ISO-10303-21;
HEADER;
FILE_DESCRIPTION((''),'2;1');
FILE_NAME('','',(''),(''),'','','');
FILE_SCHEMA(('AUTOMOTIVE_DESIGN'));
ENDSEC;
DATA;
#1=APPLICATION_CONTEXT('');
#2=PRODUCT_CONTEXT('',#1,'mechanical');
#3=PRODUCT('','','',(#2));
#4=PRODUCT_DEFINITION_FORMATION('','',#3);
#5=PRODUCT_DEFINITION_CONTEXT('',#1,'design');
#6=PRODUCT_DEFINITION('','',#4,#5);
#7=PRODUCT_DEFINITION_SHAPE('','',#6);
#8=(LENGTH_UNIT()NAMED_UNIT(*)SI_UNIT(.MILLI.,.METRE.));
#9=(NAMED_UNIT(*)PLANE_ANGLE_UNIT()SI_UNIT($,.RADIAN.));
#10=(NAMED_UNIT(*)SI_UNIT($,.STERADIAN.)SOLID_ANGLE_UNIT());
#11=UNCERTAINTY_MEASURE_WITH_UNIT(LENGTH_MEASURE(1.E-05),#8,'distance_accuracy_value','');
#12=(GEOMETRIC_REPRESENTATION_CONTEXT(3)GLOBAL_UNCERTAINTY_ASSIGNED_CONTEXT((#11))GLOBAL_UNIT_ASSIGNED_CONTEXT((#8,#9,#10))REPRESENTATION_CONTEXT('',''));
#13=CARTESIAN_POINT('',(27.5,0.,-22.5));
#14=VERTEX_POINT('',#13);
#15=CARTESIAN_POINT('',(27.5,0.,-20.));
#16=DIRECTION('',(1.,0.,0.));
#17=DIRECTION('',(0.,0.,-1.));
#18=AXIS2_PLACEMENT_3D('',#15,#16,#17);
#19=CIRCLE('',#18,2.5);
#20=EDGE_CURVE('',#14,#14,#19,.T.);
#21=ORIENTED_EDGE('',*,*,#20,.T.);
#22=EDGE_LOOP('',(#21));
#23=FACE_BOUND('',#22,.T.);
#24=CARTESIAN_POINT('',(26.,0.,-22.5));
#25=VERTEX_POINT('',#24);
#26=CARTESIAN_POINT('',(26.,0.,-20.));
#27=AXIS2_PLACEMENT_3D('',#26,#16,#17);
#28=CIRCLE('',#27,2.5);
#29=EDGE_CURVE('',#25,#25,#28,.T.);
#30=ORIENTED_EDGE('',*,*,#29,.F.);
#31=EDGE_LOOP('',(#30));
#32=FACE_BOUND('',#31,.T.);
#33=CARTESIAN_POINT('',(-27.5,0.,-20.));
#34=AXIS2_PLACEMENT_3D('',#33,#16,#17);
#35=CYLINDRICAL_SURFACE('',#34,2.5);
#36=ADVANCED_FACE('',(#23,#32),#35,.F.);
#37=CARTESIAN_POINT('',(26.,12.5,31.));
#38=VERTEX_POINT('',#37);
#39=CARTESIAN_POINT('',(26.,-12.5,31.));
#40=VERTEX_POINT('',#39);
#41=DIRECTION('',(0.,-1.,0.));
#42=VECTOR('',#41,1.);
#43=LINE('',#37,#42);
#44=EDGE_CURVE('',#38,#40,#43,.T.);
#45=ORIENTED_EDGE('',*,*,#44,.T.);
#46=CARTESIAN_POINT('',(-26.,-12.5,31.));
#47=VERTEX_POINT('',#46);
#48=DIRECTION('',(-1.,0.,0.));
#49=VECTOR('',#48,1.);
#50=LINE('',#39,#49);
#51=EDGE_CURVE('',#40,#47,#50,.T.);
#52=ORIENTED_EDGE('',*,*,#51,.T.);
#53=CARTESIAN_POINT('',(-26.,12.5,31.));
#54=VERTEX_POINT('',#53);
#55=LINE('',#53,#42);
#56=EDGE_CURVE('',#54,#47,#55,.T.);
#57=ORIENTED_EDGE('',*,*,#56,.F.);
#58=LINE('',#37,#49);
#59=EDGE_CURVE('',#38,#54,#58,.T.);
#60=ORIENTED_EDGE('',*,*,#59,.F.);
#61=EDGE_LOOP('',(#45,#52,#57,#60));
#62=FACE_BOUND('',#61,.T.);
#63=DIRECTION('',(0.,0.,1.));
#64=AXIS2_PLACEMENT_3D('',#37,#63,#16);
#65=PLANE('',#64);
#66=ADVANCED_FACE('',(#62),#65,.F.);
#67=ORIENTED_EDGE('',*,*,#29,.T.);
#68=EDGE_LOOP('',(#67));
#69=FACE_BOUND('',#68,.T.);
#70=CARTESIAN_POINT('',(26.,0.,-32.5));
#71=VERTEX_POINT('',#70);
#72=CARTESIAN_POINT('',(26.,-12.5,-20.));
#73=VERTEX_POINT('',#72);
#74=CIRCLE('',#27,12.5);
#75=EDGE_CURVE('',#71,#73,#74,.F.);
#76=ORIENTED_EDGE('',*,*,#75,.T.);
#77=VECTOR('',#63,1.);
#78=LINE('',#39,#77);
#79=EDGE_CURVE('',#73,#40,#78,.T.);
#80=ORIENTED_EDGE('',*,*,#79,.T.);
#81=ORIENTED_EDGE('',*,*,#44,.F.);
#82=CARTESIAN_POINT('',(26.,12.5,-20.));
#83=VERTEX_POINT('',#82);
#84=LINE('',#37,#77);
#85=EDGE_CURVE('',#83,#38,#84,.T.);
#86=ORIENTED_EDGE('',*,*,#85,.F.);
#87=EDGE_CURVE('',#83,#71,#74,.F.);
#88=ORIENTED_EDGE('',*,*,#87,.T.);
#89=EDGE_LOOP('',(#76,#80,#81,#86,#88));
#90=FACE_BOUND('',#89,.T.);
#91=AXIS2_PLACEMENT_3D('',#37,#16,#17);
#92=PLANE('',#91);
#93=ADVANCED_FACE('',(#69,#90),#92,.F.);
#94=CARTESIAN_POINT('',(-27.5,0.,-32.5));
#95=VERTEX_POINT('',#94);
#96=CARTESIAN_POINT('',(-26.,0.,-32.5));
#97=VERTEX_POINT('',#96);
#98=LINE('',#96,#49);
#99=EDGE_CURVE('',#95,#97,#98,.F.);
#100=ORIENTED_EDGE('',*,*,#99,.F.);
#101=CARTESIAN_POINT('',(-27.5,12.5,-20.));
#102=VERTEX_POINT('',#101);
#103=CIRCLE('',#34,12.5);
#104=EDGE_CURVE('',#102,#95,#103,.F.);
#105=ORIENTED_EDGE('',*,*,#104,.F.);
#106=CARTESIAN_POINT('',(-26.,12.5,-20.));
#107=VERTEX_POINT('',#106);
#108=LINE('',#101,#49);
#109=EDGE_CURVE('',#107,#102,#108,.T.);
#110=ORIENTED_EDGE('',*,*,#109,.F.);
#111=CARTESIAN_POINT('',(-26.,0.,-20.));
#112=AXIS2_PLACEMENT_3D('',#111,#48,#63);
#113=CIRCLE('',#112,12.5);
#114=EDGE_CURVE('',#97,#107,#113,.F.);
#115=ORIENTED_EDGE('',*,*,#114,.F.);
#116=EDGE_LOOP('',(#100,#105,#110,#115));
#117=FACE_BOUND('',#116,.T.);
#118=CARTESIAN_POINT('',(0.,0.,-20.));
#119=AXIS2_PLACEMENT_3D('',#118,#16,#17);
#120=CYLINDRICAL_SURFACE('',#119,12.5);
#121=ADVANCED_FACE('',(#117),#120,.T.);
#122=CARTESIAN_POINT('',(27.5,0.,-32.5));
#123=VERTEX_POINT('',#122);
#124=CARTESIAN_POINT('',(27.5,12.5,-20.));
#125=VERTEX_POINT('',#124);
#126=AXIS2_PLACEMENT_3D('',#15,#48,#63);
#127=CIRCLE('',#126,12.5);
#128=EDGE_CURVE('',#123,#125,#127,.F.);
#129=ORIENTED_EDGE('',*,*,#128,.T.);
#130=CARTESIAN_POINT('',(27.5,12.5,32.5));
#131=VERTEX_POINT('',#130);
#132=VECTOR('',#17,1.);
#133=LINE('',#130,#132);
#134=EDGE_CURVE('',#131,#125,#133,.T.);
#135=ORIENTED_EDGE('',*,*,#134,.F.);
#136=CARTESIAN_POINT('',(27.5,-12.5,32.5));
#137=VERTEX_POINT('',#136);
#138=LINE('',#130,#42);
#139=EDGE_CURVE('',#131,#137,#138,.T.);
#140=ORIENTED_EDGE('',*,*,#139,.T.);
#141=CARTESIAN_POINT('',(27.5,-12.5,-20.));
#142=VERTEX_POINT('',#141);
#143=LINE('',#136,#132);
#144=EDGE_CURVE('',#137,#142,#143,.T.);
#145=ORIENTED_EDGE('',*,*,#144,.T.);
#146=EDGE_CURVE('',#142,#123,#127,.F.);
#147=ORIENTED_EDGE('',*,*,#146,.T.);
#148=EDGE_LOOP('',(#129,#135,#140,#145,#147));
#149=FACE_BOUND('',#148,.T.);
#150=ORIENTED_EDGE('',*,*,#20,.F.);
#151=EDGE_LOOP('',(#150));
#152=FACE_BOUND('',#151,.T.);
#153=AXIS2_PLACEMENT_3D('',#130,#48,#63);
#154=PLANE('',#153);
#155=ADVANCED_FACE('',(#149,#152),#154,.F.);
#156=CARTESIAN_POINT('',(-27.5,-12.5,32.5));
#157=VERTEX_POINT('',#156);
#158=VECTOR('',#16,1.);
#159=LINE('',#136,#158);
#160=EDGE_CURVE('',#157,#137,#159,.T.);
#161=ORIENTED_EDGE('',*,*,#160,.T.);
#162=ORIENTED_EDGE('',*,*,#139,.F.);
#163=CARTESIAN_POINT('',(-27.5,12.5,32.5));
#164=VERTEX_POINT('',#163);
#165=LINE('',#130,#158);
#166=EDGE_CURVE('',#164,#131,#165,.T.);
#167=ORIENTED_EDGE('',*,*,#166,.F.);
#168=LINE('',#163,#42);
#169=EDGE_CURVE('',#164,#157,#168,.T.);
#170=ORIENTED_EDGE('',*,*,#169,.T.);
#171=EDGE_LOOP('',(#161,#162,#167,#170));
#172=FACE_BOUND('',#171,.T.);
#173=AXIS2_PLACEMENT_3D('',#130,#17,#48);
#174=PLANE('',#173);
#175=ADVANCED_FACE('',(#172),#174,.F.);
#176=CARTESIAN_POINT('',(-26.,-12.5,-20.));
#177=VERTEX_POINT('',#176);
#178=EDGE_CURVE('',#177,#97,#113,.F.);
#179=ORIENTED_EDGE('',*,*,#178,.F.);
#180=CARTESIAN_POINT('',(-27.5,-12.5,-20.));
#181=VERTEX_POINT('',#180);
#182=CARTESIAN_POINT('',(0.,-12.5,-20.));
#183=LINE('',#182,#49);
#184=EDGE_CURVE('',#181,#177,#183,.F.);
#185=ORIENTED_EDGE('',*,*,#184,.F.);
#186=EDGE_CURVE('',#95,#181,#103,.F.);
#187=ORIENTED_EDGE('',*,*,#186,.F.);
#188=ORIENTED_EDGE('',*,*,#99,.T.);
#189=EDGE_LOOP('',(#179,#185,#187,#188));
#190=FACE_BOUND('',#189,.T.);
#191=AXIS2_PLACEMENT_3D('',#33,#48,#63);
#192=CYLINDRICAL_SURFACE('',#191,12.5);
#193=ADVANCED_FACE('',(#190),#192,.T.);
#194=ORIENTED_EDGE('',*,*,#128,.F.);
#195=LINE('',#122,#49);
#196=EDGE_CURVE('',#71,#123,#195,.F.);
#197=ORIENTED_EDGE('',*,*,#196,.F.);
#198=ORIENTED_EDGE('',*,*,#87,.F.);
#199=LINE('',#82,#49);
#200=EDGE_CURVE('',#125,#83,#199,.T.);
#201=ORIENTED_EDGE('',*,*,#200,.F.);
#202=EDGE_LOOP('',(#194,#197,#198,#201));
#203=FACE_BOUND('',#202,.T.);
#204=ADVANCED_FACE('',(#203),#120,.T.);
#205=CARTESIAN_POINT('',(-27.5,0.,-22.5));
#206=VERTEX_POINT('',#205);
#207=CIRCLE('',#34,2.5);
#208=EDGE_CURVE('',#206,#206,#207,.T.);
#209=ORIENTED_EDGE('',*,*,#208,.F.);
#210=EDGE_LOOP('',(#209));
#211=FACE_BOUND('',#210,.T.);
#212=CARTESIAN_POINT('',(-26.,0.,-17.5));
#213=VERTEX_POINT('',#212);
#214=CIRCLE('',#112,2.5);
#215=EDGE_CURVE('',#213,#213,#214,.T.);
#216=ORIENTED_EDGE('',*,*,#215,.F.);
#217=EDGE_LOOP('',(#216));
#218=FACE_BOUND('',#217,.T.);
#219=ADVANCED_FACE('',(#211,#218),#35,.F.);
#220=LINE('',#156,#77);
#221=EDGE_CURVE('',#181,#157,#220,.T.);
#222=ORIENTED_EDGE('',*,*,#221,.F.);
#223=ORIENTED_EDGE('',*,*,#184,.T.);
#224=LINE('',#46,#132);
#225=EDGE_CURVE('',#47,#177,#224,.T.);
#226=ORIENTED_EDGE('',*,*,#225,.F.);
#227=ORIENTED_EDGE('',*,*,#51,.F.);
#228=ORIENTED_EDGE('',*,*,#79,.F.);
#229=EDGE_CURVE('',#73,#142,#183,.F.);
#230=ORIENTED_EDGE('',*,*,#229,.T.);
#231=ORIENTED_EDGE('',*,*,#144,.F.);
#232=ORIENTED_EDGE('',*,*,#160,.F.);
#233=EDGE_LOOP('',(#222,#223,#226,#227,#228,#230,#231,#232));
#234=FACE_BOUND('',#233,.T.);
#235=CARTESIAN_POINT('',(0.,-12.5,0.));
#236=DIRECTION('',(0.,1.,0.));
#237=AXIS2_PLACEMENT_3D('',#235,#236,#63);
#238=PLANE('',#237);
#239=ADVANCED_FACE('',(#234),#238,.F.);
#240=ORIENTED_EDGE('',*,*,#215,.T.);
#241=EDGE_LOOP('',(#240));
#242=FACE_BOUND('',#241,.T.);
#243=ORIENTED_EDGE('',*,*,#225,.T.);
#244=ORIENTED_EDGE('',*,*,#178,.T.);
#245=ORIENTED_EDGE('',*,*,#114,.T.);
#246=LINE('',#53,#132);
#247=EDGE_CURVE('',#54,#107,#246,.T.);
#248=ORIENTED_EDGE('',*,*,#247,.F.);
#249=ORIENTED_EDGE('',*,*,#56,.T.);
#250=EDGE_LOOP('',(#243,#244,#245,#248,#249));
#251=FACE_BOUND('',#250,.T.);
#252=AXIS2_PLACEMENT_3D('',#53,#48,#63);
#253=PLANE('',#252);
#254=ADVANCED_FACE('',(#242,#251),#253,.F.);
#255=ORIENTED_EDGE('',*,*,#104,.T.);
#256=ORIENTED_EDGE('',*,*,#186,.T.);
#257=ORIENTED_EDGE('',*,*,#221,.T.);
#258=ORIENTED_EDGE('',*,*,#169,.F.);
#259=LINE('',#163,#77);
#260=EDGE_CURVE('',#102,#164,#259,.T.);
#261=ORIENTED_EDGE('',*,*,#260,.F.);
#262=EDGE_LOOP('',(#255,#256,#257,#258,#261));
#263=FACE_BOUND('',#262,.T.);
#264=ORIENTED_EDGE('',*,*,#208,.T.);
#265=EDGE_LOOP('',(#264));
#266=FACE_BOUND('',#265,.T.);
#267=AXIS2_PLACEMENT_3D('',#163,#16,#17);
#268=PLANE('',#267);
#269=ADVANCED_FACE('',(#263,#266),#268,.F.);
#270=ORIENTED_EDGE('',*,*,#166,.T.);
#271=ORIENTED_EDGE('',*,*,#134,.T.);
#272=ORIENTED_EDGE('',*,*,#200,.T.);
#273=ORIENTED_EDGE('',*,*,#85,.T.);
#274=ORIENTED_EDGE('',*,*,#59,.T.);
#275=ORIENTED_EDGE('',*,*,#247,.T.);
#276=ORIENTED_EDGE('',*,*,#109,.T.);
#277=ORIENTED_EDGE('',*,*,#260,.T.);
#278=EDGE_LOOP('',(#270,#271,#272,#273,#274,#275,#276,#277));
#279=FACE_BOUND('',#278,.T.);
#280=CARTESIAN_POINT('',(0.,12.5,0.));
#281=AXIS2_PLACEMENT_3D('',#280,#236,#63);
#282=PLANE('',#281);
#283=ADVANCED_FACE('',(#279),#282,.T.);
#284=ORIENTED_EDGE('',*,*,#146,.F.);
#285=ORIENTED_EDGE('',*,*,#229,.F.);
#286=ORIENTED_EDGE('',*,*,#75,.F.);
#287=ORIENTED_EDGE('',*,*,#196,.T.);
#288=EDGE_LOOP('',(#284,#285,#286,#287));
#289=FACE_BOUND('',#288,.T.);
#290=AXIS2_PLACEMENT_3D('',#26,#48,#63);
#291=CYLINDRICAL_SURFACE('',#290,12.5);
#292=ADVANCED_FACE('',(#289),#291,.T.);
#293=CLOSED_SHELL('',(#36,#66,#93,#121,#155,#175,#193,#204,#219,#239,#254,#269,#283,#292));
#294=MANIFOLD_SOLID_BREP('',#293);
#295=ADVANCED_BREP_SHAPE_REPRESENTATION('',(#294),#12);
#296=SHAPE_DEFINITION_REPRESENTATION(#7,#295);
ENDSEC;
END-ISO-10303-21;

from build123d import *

# Parameters (mm, degrees)
BOSS_EXTRUDE1_DEPTH     = 12.5
FILLET1_R               = 12.5
CUT_EXTRUDE1_DEPTH      = 45.370598373
CUT_EXTRUDE1_DEPTH_BACK = 45.370598373
SKETCH2_R               = 2.5


with BuildPart() as part:
    # Sketch1 → Boss-Extrude1 (new, symmetric)
    with BuildSketch(Plane(origin=(0, 0, 0), x_dir=(1, 0, 0), z_dir=(0, 1, 0))):
        Polygon((26, -31), (26, 32.5), (27.5, 32.5), (27.5, -32.5), (-27.5, -32.5), (-27.5, 32.5), (-26, 32.5), (-26, -31), align=None)
    extrude(amount=BOSS_EXTRUDE1_DEPTH, both=True)

    # Fillet1
    fillet1_edges = [part.edges().sort_by_distance(p)[0] for p in [
        (-26.75, -12.5, -32.5),
        (-26.75, 12.5, -32.5),
        (26.75, -12.5, -32.5),
        (26.75, 12.5, -32.5),
    ]]
    fillet(fillet1_edges, radius=FILLET1_R - 0.0001)  # a hair under: the kernel refuses the full size

    # Sketch2 → Cut-Extrude1 (cut, two sides: drawn at the far end of the back side and taken through both)
    with BuildSketch(Plane(origin=(0, 0, 0), x_dir=(0, 0, -1), z_dir=(1, 0, 0)).offset(-CUT_EXTRUDE1_DEPTH_BACK)):
        with Locations((20, 0)):
            Circle(SKETCH2_R)
    extrude(amount=CUT_EXTRUDE1_DEPTH + CUT_EXTRUDE1_DEPTH_BACK, mode=Mode.SUBTRACT)


solid = part.part
